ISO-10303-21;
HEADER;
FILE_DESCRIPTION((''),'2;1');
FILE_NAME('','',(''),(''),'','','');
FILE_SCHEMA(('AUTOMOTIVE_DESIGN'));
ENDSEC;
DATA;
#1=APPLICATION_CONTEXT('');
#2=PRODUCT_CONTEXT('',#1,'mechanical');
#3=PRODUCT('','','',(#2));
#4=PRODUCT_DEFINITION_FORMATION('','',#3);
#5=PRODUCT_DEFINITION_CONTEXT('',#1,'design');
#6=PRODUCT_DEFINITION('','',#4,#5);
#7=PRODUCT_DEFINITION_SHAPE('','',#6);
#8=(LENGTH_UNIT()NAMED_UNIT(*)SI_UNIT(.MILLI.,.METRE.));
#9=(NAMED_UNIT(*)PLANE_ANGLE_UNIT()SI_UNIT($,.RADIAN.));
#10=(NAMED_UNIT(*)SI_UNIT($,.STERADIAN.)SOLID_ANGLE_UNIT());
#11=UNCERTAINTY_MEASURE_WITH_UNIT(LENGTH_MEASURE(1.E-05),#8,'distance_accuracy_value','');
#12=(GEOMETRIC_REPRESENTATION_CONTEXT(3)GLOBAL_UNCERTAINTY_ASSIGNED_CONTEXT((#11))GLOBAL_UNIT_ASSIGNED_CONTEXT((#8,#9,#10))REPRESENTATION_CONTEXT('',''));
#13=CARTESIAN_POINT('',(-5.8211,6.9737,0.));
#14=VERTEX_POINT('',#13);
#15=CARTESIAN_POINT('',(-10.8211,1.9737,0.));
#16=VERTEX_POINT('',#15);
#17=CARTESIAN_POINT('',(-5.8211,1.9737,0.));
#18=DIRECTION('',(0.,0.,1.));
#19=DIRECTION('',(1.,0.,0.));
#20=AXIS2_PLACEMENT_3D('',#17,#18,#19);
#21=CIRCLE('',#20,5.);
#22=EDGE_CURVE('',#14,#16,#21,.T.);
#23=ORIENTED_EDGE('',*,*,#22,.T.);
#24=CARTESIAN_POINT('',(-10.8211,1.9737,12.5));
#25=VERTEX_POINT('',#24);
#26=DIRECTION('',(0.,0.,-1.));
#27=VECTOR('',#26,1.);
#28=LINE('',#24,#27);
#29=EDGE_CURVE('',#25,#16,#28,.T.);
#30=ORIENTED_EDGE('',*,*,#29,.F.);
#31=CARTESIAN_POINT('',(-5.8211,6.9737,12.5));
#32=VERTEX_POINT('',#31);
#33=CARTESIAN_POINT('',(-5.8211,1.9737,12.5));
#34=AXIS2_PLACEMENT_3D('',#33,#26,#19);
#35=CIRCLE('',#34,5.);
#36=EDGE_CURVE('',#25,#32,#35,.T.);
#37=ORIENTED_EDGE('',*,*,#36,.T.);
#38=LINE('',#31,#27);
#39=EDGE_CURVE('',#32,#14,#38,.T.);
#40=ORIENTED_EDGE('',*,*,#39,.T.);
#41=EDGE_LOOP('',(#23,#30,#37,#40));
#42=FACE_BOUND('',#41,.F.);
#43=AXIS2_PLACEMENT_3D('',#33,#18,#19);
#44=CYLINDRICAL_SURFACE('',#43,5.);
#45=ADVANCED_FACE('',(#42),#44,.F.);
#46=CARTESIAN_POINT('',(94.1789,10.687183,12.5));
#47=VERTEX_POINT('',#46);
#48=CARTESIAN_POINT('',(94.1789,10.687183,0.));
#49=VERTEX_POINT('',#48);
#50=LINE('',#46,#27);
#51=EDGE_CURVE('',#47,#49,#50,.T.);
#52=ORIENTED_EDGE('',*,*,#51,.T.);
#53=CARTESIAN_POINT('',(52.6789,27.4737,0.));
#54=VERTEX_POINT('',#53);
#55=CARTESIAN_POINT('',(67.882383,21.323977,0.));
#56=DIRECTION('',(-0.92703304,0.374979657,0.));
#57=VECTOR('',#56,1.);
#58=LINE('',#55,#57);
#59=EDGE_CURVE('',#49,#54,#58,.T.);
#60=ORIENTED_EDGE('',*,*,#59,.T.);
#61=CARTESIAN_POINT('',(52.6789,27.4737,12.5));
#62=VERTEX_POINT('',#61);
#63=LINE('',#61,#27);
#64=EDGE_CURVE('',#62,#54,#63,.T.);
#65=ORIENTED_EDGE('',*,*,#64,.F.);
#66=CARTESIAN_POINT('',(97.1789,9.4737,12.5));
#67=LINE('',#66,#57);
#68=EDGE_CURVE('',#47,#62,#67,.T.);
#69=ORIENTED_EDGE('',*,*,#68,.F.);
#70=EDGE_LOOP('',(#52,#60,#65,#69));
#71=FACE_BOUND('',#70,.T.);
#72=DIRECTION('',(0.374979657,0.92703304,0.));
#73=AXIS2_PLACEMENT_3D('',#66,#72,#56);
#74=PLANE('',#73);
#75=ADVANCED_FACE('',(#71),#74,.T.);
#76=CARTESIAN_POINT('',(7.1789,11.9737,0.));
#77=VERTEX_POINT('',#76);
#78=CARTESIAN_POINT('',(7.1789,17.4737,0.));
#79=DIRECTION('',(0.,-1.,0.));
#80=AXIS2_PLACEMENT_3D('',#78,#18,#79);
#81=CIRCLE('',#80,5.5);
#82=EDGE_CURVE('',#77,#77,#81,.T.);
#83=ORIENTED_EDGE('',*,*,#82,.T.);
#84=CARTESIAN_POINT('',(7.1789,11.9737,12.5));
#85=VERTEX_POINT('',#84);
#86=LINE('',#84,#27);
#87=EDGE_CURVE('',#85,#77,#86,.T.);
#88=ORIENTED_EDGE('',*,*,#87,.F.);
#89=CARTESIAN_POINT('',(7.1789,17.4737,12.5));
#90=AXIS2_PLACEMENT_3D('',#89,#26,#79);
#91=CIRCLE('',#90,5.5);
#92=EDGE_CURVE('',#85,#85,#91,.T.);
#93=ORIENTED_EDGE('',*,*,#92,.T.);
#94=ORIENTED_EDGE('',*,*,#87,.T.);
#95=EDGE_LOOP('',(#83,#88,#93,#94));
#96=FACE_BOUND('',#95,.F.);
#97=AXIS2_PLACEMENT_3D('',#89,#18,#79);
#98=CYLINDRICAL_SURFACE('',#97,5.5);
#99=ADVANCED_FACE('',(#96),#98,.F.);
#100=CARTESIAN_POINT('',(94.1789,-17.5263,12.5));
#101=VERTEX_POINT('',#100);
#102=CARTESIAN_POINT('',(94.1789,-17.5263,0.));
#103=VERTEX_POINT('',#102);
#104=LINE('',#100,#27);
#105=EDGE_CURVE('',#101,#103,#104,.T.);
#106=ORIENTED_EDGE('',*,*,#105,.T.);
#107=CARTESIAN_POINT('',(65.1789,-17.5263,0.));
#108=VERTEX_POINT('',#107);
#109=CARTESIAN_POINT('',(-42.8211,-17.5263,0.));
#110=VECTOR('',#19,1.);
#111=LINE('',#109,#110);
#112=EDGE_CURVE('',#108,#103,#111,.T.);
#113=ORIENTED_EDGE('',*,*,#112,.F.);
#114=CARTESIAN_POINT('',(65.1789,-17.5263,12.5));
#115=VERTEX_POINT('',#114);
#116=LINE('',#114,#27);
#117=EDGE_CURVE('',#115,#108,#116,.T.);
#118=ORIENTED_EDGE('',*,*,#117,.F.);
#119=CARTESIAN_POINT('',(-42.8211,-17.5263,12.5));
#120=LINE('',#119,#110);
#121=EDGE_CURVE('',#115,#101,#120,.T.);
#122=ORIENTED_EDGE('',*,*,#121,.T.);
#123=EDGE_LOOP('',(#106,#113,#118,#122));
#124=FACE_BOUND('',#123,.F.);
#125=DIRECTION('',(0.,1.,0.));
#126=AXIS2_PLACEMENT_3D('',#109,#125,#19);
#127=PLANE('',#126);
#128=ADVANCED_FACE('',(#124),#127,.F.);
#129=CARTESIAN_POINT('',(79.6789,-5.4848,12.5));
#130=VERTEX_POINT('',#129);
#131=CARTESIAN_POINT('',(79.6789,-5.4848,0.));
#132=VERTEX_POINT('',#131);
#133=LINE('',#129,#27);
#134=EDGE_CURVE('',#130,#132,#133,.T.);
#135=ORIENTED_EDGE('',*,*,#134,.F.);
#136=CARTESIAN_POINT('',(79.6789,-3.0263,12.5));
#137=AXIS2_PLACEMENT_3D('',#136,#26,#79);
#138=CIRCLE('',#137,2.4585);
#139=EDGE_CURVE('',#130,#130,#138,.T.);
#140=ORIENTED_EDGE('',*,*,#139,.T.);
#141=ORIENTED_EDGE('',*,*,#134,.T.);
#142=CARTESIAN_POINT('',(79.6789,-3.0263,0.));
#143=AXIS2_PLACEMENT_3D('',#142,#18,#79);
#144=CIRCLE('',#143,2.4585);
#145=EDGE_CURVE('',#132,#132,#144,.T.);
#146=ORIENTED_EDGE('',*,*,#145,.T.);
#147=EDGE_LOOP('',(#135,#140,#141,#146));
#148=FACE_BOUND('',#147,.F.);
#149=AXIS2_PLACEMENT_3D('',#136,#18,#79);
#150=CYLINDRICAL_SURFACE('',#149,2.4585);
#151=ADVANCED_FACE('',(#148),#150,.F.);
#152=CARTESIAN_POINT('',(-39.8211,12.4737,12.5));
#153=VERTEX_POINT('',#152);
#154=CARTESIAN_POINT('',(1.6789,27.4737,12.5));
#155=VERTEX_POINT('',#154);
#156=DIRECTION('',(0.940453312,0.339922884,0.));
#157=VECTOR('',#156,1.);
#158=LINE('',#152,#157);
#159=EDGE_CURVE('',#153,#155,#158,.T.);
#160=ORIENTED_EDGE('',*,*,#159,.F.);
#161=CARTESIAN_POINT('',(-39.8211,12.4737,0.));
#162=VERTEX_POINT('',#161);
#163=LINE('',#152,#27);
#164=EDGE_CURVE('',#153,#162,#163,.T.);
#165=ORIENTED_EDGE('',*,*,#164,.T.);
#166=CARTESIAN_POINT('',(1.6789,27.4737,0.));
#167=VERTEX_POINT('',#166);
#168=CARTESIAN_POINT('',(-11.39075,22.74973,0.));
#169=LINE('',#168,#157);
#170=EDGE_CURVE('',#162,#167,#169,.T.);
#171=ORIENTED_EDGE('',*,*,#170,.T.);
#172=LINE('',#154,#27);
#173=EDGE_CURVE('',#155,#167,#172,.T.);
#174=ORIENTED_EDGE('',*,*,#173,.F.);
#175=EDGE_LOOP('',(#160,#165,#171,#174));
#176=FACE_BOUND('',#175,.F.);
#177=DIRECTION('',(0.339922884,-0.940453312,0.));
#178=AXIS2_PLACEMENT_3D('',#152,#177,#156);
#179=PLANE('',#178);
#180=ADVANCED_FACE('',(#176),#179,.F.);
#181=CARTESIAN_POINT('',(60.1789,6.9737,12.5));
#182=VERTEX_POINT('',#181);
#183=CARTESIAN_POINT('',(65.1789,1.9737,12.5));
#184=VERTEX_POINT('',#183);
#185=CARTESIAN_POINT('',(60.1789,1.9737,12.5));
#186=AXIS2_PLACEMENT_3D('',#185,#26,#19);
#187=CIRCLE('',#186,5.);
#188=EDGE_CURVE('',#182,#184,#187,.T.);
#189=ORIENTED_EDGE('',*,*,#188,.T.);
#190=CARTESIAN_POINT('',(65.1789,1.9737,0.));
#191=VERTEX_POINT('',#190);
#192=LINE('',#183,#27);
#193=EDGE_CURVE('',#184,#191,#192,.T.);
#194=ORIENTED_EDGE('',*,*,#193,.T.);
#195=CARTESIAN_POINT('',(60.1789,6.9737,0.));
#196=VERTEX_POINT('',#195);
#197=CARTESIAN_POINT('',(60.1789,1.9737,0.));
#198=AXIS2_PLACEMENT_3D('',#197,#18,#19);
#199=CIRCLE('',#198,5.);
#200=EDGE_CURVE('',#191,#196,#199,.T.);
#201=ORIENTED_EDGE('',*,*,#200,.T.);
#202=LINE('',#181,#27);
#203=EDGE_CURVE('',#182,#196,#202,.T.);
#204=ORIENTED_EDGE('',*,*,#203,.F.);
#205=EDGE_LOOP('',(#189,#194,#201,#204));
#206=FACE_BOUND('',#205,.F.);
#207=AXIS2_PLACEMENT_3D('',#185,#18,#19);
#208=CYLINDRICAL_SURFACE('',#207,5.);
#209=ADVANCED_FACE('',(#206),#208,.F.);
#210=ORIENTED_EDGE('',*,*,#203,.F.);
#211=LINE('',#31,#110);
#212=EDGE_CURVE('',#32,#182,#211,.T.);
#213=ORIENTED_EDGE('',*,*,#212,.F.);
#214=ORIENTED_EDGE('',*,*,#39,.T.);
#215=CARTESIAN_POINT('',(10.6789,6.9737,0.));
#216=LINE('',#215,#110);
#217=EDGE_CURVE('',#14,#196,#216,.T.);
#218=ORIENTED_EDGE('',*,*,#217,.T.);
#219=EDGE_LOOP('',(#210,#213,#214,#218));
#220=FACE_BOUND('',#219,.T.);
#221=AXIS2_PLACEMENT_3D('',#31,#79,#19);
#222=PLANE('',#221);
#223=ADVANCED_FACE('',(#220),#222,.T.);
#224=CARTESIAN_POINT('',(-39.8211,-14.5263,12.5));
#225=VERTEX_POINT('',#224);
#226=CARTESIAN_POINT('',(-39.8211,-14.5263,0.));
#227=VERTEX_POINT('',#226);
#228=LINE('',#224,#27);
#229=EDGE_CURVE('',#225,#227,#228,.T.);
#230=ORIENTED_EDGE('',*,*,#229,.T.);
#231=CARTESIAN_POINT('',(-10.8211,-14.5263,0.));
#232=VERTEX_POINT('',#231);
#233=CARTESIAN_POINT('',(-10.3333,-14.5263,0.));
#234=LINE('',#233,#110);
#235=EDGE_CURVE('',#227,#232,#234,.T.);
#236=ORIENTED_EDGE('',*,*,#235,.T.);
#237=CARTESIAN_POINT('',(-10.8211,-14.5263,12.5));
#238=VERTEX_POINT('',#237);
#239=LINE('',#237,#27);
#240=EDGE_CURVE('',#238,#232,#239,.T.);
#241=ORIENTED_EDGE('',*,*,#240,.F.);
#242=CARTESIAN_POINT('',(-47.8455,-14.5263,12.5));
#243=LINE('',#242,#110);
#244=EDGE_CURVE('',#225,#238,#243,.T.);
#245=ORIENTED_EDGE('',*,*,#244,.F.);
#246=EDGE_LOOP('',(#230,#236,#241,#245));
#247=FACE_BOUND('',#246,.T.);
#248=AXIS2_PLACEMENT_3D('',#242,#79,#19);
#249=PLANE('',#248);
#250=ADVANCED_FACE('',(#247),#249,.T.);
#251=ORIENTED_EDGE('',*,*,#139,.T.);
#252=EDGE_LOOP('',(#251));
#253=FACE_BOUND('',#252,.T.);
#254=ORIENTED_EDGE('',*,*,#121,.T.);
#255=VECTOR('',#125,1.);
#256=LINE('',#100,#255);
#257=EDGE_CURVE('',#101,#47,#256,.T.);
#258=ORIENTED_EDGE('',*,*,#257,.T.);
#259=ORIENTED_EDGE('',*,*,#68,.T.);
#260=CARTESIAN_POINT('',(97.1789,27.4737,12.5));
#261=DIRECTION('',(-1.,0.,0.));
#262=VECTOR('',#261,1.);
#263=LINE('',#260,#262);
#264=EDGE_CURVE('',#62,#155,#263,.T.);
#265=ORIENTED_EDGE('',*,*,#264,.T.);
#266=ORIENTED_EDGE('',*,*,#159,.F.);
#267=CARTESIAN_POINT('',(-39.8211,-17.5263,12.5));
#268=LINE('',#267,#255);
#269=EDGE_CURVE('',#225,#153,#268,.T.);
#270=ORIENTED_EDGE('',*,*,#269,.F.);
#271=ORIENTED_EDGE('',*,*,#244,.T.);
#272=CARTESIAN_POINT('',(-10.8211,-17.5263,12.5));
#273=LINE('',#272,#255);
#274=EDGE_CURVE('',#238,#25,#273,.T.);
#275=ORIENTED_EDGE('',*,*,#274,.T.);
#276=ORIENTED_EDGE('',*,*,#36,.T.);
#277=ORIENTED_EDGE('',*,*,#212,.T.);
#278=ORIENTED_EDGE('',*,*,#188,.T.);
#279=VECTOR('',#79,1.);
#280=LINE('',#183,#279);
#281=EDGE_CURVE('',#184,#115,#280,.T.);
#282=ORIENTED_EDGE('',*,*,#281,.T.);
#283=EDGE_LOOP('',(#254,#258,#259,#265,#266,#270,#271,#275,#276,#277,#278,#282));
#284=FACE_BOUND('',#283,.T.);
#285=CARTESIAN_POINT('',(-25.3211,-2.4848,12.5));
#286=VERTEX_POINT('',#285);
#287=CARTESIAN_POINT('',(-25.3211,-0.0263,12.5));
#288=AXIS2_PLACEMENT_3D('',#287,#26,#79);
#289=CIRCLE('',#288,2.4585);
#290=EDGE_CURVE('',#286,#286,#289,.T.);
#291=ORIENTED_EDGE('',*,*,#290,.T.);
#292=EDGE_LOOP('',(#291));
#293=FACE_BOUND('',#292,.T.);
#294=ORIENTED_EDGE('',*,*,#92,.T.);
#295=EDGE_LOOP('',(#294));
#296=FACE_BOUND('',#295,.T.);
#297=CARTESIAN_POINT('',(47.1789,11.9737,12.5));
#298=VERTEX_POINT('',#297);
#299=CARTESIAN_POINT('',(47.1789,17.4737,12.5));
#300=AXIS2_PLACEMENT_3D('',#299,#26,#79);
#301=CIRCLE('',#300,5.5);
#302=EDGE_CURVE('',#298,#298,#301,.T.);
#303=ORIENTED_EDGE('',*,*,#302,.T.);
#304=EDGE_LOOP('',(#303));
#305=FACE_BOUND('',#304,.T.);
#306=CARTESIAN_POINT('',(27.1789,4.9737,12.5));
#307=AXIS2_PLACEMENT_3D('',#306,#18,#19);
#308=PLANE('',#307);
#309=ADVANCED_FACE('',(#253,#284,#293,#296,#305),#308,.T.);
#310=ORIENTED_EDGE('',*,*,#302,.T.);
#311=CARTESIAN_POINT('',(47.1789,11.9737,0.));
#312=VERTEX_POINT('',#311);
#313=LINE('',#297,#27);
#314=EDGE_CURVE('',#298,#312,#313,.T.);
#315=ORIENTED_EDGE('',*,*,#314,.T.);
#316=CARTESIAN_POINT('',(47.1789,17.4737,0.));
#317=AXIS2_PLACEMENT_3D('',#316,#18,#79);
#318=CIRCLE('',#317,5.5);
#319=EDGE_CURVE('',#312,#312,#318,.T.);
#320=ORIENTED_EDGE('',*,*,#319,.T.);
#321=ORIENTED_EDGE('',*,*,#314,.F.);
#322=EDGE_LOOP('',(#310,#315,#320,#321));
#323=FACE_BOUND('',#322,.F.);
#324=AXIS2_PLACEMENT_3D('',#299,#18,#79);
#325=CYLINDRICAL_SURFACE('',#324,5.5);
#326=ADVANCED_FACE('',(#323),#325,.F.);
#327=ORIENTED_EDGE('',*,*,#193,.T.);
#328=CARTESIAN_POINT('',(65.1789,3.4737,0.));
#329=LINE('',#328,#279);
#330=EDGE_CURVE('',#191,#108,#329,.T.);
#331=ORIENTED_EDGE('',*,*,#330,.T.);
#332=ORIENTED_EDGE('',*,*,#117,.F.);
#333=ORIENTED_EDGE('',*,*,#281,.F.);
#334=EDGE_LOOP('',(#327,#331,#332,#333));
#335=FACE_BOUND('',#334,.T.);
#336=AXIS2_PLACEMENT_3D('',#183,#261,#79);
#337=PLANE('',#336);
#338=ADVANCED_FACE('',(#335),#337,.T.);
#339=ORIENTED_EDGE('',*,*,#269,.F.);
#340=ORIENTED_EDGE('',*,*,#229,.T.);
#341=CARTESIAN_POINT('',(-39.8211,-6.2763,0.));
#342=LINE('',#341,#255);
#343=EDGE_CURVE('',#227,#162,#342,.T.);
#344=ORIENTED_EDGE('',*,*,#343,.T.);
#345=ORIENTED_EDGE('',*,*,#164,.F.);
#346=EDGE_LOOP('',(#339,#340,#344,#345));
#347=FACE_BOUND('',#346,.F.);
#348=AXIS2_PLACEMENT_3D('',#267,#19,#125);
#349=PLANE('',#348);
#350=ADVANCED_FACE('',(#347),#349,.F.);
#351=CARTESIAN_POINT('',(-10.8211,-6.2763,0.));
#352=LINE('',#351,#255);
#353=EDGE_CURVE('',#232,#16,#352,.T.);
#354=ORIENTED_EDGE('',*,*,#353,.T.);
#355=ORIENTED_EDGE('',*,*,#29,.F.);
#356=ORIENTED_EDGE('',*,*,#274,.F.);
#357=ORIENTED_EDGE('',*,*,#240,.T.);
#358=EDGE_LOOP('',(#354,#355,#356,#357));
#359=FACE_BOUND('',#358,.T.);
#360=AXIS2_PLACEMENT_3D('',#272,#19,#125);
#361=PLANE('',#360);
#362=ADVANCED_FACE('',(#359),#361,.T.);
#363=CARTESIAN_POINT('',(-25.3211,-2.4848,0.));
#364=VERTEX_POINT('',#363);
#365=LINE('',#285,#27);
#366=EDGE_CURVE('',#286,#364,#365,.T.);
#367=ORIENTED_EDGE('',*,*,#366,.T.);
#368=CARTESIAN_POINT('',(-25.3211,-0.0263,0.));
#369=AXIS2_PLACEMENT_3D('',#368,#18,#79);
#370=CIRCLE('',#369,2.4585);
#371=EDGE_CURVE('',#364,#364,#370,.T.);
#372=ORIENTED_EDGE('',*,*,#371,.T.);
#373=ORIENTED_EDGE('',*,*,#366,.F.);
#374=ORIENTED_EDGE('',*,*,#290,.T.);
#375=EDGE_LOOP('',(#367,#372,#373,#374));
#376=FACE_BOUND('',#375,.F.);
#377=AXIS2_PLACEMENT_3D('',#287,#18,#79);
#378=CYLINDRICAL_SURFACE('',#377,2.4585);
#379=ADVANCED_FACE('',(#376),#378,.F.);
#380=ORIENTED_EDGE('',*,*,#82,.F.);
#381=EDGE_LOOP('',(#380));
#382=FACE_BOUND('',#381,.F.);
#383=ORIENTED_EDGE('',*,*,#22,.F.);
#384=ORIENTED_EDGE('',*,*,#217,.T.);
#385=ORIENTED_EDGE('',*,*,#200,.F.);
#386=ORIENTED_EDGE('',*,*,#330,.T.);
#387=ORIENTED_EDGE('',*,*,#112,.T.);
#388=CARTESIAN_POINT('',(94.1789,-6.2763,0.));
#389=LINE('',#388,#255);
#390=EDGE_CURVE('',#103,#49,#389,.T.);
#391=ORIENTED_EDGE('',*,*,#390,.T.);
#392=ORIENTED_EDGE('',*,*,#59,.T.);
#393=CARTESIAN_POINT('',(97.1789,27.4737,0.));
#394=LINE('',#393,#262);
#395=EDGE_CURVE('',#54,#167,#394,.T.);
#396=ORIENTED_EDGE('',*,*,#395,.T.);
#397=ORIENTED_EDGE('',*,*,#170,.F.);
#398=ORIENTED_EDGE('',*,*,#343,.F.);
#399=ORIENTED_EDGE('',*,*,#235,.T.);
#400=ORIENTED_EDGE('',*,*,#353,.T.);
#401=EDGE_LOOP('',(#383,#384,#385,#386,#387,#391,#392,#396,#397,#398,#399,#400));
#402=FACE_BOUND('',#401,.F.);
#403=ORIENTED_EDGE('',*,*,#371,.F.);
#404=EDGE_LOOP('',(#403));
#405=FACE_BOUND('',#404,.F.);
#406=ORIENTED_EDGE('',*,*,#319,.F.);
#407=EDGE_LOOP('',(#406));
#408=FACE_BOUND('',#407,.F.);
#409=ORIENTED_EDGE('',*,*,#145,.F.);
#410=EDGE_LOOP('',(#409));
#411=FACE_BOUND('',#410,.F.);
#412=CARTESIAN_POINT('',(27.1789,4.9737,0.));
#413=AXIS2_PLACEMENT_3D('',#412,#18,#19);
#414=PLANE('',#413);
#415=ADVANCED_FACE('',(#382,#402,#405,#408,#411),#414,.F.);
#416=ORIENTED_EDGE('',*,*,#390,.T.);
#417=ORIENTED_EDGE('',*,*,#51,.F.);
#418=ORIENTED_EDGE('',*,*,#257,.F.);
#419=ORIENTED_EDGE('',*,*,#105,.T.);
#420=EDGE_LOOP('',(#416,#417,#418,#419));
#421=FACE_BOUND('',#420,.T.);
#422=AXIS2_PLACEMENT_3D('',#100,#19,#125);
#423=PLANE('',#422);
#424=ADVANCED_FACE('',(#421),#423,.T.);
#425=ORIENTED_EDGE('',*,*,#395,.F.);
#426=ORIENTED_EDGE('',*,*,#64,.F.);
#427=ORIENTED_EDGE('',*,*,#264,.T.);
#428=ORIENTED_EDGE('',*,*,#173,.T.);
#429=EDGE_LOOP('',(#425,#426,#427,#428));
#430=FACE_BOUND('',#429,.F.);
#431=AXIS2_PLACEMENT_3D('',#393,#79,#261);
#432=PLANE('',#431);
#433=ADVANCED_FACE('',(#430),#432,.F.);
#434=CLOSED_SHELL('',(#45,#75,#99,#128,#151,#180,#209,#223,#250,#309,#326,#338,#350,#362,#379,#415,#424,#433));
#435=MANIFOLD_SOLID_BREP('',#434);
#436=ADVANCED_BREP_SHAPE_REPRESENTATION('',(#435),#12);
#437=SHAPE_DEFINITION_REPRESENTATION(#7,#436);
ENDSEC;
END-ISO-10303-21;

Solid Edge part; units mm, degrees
sketch "Sketch1" plane through (0, 0, 0) normal (0, 0, 1) x (1, 0, 0)
  line L0 (-42.8211, -17.5263) -> (97.1789, -17.5263)
  line L1 (97.1789, -17.5263) -> (97.1789, 27.4737)
  line L2 (97.1789, 27.4737) -> (-42.8211, 27.4737)
  line L3 (-42.8211, 27.4737) -> (-42.8211, -17.5263)
  dimension "D1" = 140
  dimension "D2" = 45
extrude "Protrusion1" add sketch "Sketch1" along normal blind 12.5
hole "Hole_1" at (47.1789, 17.4737, 12.5) direction (0, 0, -1) diameter 11 end through all
hole "Hole1" at (7.1789, 17.4737, 12.5) direction (0, 0, -1) diameter 11 end through all
hole "Hole_3" at (79.6789, -3.0263, 12.5) direction (0, 0, -1) diameter 4.917 end through all
hole "Hole2" at (-25.3211, -0.0263, 12.5) direction (0, 0, -1) diameter 4.917 end through all
sketch "Sketch2" plane through (27.1789, 4.9737, 12.5) normal (0, 0, 1) x (1, 0, 0)
  line L0 (-38, -22.5) -> (-38, -3)
  arc A0 (-38, -3) -> (-33, 2) centre (-33, -3) cw
  line L1 (-33, 2) -> (33, 2)
  arc A1 (33, 2) -> (38, -3) centre (33, -3) cw
  line L2 (38, -3) -> (38, -22.5)
  line L3 (-38, -22.5) -> (38, -22.5)
  line L4 (25.5, 22.5) -> (70, 22.5)
  line L5 (70, 22.5) -> (70, 4.5)
  line L6 (70, 4.5) -> (25.5, 22.5)
  line L7 (-70, 22.5) -> (-25.5, 22.5)
  line L8 (-25.5, 22.5) -> (-70, 7.5)
  line L9 (-70, 7.5) -> (-70, 22.5)
  dimension "D1" = 5
  dimension "D2" = 2
  dimension "D3" = 2
  dimension "D4" = 5
  dimension "D5" = 5
extrude "Cutout1" cut sketch "Sketch2" against normal through all
sketch "Sketch3" plane through (27.1789, 4.9737, 12.5) normal (0, 0, 1) x (1, 0, 0)
  line L0 (-35, -19.5) -> (-35, -22.5)
  line L1 (-35, -22.5) -> (-75.0244, -22.5)
  line L2 (-75.0244, -22.5) -> (-75.0244, -19.5)
  line L3 (-75.0244, -19.5) -> (-35, -19.5)
  line L4 (70, -22.5) -> (67, -22.5)
  line L5 (67, -22.5) -> (67, 21.0516)
  line L6 (67, 21.0516) -> (70, 21.0516)
  line L7 (70, 21.0516) -> (70, -22.5)
  line L8 (-70, -22.5) -> (-67, -22.5)
  line L9 (-67, -22.5) -> (-67, 20.7963)
  line L10 (-67, 20.7963) -> (-70, 20.7963)
  line L11 (-70, 20.7963) -> (-70, -22.5)
  dimension "D1" = 2
  dimension "D2" = 2
  dimension "D3" = 43.5516
  dimension "D4" = 2
extrude "Cutout2" cut sketch "Sketch3" against normal through all
sketch "Sketch4" plane through (27.1789, 4.9737, 12.5) normal (0, 0, 1) x (1, 0, 0)
  line L0 (-67, 7.5) -> (-25.5, 22.5)
  line L1 (-25.5, 22.5) -> (-67, 8.5112)
  line L2 (-67, 8.5112) -> (-67, 7.5)
extrude "Cutout3" cut sketch "Sketch4" against normal through all
properties material "Aluminum, 6061-T6"
